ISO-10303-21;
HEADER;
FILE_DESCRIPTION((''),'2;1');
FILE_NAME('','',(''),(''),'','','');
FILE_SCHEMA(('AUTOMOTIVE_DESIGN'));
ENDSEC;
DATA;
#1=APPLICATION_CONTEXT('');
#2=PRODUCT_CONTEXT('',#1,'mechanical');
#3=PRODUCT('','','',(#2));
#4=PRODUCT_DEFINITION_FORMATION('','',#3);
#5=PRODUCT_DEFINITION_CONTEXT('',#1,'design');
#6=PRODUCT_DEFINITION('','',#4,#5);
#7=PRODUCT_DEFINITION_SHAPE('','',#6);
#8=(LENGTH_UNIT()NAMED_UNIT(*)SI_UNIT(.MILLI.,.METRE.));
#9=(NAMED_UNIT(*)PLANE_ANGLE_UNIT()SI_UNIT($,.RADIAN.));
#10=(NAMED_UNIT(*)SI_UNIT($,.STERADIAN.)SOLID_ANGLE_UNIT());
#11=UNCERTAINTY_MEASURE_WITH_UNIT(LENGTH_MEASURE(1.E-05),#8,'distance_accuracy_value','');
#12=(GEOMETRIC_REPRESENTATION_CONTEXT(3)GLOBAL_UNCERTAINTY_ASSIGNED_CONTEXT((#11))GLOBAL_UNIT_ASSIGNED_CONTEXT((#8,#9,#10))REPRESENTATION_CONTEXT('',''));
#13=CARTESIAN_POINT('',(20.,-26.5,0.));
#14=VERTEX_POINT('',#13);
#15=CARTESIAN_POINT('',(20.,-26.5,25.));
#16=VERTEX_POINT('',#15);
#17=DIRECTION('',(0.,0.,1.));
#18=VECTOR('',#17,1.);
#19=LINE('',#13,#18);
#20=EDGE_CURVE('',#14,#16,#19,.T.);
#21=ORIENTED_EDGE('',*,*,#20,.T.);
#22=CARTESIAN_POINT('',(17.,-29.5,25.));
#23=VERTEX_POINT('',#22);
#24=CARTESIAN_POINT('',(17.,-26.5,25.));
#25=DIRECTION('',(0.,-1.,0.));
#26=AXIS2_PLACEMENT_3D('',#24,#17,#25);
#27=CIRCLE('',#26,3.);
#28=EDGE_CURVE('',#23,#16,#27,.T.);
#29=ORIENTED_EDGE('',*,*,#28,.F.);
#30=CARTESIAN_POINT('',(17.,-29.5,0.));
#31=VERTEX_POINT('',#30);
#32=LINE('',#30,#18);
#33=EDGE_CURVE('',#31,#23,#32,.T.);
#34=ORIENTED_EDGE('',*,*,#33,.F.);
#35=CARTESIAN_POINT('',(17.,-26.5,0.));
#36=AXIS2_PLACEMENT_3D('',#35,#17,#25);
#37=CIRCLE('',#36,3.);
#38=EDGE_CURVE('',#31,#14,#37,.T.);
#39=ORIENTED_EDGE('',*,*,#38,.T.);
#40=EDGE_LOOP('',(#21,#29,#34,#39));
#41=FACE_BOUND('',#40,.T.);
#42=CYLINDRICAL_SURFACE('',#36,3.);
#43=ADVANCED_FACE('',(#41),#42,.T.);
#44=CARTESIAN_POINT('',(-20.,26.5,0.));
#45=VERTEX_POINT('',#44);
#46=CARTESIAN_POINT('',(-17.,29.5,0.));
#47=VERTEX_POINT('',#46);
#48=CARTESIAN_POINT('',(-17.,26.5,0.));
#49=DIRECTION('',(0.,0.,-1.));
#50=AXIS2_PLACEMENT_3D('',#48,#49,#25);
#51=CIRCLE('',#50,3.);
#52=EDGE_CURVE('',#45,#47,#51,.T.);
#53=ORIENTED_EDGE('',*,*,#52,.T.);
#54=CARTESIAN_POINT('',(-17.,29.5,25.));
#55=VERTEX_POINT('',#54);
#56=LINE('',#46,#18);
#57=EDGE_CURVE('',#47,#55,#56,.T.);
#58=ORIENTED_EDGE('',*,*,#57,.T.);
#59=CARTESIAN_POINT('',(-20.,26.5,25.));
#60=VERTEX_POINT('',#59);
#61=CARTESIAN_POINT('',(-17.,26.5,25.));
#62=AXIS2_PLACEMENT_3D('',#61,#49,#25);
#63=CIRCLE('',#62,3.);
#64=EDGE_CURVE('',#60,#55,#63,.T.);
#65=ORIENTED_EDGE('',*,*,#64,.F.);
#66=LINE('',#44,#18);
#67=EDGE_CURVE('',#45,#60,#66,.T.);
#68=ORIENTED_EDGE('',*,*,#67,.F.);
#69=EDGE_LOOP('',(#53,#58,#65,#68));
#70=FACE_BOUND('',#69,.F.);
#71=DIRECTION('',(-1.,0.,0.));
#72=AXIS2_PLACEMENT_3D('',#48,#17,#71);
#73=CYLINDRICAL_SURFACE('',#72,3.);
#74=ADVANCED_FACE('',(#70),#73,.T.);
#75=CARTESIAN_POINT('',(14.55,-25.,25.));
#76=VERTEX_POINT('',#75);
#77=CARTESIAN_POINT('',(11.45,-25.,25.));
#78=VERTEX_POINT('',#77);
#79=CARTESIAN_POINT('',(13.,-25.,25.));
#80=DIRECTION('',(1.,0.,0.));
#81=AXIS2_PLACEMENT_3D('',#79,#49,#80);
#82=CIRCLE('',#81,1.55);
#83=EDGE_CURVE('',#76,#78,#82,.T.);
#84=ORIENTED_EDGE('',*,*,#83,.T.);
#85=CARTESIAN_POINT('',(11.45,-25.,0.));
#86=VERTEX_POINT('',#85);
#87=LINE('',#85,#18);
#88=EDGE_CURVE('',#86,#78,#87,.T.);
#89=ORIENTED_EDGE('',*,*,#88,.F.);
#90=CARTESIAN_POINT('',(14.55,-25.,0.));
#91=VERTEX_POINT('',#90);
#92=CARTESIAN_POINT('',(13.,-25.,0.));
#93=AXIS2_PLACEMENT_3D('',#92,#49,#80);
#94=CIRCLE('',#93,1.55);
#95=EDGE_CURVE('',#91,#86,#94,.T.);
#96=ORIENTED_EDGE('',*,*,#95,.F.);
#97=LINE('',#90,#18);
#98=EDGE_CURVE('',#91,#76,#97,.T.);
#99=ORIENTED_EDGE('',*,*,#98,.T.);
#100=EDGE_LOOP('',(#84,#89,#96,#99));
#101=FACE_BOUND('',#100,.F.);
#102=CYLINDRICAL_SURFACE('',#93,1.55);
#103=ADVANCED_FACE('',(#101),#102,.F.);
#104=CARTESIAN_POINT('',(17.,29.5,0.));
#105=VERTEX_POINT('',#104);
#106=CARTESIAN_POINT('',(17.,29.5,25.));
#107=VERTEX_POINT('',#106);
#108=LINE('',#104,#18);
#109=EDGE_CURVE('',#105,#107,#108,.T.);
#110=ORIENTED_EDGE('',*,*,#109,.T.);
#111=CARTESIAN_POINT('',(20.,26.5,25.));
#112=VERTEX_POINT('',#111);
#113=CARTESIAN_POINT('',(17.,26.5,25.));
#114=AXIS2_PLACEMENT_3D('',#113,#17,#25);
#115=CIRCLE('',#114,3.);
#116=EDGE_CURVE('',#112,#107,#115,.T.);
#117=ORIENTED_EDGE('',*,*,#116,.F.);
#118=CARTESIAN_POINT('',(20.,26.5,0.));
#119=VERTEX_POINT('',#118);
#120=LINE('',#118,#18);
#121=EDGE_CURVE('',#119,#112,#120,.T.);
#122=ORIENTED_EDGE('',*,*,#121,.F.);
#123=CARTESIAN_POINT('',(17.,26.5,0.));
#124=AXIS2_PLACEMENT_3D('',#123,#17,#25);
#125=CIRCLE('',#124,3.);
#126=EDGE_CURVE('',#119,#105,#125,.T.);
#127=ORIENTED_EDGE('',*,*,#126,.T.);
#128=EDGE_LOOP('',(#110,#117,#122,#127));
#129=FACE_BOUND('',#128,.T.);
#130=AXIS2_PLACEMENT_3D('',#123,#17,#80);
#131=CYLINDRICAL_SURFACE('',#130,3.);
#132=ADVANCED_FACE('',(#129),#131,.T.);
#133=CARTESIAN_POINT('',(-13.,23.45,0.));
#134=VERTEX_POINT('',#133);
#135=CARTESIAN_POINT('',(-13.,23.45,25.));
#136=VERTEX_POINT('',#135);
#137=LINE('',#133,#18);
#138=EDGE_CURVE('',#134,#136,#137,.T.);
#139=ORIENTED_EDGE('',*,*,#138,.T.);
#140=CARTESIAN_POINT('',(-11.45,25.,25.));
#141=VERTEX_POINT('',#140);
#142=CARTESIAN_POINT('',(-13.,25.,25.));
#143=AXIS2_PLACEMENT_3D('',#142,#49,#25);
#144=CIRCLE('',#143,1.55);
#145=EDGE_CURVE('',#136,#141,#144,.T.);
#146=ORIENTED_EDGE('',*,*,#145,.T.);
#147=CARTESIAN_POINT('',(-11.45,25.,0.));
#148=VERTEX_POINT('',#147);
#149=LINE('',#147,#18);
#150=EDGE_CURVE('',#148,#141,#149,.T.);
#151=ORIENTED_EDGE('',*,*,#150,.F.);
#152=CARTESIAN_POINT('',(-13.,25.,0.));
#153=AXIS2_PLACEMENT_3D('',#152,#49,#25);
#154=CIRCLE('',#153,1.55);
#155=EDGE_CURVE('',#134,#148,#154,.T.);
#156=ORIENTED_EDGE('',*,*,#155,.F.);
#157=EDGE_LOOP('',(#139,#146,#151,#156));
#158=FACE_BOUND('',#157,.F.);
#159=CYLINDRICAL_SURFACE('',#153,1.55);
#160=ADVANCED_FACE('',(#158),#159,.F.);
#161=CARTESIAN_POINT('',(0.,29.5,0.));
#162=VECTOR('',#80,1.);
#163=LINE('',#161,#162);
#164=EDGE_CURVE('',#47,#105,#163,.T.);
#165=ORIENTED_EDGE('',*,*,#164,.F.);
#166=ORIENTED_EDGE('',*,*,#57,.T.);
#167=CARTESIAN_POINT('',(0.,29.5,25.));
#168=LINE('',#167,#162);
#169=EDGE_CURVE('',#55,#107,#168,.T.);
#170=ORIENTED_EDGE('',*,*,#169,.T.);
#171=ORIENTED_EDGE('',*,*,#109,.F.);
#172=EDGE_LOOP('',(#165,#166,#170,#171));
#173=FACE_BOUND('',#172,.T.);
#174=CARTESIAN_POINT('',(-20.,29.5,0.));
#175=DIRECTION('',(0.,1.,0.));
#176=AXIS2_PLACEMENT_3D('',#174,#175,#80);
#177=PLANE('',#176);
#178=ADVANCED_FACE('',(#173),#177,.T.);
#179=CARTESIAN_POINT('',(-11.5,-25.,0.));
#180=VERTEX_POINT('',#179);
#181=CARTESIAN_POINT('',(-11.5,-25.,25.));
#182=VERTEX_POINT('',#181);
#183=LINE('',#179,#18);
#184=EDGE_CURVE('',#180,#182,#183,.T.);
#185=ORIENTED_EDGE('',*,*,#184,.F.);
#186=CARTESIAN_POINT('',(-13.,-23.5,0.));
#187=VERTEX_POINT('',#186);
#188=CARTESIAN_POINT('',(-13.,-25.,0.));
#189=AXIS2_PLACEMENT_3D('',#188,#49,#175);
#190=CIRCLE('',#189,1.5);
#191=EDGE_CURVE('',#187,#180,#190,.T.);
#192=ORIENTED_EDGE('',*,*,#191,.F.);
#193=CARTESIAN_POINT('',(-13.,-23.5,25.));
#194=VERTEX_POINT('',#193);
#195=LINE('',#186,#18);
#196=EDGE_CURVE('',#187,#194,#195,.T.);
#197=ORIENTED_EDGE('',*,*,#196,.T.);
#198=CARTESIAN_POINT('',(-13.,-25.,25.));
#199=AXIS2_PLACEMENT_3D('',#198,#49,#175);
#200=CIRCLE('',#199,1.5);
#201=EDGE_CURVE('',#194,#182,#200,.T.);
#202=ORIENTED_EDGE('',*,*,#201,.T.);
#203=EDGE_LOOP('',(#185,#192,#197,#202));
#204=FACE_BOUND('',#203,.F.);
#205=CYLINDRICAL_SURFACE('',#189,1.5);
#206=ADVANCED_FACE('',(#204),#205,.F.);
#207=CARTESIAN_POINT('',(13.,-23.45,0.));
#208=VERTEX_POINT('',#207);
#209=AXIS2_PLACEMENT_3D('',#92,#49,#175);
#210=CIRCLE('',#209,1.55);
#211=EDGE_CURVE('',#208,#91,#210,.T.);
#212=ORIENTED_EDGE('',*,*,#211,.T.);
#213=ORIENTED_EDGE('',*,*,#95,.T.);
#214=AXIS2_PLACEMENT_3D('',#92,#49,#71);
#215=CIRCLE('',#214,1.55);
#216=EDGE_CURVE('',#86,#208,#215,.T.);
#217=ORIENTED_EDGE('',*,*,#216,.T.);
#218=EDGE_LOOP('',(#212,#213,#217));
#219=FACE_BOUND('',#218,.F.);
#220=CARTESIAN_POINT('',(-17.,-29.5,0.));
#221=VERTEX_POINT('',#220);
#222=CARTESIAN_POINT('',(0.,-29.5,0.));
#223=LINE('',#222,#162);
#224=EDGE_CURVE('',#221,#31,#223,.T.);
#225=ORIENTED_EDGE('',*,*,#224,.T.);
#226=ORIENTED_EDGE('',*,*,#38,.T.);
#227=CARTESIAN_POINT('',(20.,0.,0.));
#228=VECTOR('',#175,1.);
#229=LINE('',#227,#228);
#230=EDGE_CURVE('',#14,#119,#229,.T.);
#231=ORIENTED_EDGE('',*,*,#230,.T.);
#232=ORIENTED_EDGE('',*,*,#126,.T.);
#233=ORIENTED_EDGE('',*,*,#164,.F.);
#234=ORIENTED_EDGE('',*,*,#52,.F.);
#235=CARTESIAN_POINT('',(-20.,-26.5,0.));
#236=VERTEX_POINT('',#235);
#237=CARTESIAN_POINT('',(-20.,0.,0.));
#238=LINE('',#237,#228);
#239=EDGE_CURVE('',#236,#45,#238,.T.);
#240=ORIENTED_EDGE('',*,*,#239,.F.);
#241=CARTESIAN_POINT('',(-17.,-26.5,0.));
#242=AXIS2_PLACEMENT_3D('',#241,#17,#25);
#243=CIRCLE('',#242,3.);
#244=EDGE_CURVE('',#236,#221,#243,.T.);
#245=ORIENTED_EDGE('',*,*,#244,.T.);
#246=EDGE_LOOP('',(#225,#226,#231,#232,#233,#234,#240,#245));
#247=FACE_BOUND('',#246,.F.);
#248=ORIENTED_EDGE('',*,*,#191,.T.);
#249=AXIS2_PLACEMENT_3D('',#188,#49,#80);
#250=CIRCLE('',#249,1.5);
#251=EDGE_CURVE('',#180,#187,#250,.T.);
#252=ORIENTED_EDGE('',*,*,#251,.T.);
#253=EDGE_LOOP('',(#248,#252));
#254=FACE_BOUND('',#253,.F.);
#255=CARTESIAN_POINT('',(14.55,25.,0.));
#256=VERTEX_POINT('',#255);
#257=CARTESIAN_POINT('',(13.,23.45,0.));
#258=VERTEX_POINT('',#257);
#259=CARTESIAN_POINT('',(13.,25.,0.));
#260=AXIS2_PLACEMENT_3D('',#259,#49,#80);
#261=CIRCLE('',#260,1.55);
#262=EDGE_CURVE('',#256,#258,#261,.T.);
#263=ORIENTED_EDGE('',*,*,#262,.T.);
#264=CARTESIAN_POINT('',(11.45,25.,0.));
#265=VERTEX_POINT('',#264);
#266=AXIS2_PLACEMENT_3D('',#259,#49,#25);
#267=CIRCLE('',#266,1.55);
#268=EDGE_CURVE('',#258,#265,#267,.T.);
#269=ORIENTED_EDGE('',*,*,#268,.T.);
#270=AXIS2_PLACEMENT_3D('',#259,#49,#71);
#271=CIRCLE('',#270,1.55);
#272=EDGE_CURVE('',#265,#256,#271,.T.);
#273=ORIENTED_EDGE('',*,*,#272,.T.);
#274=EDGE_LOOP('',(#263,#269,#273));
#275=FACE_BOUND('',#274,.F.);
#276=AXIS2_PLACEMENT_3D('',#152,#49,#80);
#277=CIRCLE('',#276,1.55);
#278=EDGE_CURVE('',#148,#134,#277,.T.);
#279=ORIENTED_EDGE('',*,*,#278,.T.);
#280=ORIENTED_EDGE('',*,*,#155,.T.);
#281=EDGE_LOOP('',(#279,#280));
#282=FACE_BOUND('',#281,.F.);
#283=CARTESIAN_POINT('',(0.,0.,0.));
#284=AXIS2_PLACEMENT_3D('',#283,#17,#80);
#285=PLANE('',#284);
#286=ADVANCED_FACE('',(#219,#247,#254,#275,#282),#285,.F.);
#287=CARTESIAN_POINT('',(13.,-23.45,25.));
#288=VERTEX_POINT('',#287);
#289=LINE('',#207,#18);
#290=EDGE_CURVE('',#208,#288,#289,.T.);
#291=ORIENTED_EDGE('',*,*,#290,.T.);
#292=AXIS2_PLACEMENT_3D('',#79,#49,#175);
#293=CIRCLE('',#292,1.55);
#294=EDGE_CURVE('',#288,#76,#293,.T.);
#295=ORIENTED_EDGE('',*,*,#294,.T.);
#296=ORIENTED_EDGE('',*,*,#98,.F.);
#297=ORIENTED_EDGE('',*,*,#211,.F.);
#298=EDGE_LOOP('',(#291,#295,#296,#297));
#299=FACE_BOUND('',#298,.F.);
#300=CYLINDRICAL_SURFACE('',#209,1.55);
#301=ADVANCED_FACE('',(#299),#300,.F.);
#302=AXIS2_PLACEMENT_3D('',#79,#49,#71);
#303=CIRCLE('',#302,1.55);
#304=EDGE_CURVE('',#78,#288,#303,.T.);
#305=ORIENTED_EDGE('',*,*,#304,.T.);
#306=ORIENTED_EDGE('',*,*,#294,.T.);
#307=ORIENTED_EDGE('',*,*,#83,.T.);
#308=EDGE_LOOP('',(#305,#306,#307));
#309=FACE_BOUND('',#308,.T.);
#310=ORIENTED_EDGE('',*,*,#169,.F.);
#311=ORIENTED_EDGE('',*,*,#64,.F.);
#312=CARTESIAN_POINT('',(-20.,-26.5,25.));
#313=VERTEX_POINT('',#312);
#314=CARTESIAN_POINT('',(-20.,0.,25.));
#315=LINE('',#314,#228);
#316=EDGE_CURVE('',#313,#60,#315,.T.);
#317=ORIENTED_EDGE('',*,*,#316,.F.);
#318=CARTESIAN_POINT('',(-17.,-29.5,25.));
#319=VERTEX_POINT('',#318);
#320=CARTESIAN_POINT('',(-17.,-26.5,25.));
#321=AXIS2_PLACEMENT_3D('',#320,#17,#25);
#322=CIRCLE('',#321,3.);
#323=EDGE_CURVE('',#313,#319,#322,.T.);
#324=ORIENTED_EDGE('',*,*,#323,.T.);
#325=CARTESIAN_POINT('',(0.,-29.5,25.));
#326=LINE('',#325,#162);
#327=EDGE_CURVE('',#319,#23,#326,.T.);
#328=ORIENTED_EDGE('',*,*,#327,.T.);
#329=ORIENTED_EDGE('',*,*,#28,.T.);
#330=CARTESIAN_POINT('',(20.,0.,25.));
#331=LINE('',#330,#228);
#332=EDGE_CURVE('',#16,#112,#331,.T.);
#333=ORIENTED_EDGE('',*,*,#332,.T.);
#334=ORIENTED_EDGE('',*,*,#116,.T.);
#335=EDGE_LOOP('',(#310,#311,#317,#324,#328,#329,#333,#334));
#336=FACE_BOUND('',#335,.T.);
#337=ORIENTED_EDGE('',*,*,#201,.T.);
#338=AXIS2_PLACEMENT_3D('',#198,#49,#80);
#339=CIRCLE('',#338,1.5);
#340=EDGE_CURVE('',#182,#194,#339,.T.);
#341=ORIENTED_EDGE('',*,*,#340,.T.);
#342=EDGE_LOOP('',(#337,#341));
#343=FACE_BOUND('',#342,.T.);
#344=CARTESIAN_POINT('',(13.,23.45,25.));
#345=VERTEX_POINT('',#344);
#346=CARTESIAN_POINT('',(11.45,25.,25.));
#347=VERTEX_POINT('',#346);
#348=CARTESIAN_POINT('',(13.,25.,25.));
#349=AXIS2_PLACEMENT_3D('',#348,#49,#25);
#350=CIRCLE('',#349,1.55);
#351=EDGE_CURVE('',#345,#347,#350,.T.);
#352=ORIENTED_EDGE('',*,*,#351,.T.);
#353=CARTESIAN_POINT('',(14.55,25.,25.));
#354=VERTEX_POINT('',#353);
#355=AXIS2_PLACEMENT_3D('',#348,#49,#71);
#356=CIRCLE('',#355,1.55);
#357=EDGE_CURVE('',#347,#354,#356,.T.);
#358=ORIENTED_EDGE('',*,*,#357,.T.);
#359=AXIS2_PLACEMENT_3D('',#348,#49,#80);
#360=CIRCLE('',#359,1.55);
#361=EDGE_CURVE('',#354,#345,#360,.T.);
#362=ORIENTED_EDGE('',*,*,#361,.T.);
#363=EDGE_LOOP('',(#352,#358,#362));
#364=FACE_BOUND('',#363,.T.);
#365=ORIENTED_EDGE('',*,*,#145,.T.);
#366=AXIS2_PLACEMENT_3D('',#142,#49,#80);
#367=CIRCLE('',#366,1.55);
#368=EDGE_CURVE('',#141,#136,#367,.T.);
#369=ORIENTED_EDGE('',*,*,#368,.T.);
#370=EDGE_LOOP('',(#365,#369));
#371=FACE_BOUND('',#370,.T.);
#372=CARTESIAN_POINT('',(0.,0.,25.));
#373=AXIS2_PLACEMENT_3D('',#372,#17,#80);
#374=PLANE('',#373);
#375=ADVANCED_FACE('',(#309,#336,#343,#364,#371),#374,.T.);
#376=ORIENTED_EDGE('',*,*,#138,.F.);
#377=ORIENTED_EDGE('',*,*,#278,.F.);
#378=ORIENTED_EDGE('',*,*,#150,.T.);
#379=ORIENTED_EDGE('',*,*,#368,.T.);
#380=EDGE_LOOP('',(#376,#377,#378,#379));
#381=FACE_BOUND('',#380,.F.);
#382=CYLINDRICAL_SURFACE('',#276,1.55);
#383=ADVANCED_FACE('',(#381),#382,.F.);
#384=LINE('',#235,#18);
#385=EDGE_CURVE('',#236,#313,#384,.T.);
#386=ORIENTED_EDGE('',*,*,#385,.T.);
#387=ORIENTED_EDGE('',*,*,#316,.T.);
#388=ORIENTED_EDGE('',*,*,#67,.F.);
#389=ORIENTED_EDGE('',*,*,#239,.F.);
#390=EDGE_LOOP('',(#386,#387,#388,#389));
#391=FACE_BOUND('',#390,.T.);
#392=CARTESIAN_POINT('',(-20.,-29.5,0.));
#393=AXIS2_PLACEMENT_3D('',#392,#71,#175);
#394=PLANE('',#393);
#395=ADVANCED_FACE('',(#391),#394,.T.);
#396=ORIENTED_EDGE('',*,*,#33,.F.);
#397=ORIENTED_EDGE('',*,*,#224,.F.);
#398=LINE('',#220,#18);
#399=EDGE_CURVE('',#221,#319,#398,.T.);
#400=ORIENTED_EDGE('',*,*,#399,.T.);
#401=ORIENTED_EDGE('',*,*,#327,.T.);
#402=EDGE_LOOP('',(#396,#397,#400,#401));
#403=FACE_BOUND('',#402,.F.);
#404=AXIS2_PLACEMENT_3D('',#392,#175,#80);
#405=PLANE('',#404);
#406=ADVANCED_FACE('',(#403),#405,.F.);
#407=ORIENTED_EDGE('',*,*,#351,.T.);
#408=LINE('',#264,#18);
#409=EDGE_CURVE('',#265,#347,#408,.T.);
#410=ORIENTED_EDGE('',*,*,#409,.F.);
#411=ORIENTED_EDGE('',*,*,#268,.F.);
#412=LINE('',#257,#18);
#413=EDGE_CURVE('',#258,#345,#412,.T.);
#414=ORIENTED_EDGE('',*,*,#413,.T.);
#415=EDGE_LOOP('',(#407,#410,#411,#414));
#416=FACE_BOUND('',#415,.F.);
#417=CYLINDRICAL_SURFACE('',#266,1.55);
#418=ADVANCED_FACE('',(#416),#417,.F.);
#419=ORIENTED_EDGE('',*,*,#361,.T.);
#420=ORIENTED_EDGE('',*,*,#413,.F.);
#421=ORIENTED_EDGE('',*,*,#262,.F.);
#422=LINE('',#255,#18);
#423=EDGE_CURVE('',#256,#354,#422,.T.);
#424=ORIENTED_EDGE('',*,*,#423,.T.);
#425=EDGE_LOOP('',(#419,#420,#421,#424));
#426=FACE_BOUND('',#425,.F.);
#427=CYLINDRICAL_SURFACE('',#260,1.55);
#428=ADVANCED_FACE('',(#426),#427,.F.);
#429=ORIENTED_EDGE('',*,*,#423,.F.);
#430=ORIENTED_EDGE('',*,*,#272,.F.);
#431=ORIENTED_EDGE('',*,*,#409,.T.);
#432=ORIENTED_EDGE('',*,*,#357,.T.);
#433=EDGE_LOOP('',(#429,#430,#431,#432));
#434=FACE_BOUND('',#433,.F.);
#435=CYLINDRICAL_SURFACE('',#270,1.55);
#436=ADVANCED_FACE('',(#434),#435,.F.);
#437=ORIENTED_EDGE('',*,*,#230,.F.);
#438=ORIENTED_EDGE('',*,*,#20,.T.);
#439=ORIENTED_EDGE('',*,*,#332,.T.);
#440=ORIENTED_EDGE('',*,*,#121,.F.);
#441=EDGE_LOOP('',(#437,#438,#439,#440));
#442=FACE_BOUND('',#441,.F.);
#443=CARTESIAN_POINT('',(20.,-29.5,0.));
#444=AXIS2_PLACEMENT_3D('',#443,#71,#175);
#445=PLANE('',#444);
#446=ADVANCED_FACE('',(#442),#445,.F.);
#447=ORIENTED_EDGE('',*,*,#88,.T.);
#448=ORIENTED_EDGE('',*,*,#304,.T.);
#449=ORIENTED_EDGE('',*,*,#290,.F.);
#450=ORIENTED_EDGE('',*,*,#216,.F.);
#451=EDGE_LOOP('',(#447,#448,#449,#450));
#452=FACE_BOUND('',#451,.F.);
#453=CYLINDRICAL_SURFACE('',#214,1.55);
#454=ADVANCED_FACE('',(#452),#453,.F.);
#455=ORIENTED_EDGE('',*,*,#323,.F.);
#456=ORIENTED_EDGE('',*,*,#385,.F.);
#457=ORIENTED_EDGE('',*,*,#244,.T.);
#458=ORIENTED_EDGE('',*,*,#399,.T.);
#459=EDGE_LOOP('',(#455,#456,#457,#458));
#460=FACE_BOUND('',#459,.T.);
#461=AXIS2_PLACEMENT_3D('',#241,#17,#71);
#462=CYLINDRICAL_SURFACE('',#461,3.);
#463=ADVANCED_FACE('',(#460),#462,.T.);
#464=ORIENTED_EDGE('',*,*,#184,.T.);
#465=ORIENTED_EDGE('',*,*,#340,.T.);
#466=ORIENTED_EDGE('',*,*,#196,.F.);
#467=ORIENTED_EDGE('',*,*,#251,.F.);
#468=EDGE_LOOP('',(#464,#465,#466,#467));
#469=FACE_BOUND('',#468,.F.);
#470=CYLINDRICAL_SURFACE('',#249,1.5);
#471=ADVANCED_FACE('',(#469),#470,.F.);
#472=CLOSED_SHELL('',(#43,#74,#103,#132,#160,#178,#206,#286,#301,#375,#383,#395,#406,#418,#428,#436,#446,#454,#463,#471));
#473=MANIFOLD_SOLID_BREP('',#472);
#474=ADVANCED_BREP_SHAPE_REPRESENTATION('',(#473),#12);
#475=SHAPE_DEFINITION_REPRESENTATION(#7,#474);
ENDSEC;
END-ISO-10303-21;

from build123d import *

# Parameters (mm, degrees)
F0_W     = 40
F0_H     = 59
F1_DEPTH = 25
F2_R     = 3


with BuildPart() as f1:
    # F0 (on Top) → F1 (new body)
    with BuildSketch(Plane.XY):
        Rectangle(F0_W, F0_H)
        with BuildLine():
            ThreePointArc((-13, 23.45), (-14.0960155108, 26.0960155108), (-11.45, 25))
            Line((-11.45, 25), (11.45, 25))
            ThreePointArc((11.45, 25), (13, 26.55), (14.55, 25))
            ThreePointArc((14.55, 25), (14.0960155108, 23.9039844892), (13, 23.45))
            Line((13, 23.45), (13, -23.45))
            ThreePointArc((13, -23.45), (14.0960155108, -23.9039844892), (14.55, -25))
            ThreePointArc((14.55, -25), (13, -26.55), (11.45, -25))
            Line((11.45, -25), (-11.5, -25))
            ThreePointArc((-11.5, -25), (-14.0606601718, -26.0606601718), (-13, -23.5))
            Line((-13, -23.5), (-13, 23.45))
        make_face(mode=Mode.SUBTRACT)
        with BuildLine():
            Line((11.45, 25), (-11.45, 25))
            ThreePointArc((-11.45, 25), (-11.9039844892, 23.9039844892), (-13, 23.45))
            Line((-13, 23.45), (-13, -23.5))
            ThreePointArc((-13, -23.5), (-11.9393398282, -23.9393398282), (-11.5, -25))
            Line((-11.5, -25), (11.45, -25))
            ThreePointArc((11.45, -25), (11.9039844892, -23.9039844892), (13, -23.45))
            Line((13, -23.45), (13, 23.45))
            ThreePointArc((13, 23.45), (11.9039844892, 23.9039844892), (11.45, 25))
        make_face()
    extrude(amount=F1_DEPTH)

    # F2
    f2_edges = [f1.edges().sort_by_distance(p)[0] for p in [
        (-20, 29.5, 12.5),
        (20, 29.5, 12.5),
        (20, -29.5, 12.5),
        (-20, -29.5, 12.5),
    ]]
    fillet(f2_edges, radius=F2_R)


solid = f1.part
